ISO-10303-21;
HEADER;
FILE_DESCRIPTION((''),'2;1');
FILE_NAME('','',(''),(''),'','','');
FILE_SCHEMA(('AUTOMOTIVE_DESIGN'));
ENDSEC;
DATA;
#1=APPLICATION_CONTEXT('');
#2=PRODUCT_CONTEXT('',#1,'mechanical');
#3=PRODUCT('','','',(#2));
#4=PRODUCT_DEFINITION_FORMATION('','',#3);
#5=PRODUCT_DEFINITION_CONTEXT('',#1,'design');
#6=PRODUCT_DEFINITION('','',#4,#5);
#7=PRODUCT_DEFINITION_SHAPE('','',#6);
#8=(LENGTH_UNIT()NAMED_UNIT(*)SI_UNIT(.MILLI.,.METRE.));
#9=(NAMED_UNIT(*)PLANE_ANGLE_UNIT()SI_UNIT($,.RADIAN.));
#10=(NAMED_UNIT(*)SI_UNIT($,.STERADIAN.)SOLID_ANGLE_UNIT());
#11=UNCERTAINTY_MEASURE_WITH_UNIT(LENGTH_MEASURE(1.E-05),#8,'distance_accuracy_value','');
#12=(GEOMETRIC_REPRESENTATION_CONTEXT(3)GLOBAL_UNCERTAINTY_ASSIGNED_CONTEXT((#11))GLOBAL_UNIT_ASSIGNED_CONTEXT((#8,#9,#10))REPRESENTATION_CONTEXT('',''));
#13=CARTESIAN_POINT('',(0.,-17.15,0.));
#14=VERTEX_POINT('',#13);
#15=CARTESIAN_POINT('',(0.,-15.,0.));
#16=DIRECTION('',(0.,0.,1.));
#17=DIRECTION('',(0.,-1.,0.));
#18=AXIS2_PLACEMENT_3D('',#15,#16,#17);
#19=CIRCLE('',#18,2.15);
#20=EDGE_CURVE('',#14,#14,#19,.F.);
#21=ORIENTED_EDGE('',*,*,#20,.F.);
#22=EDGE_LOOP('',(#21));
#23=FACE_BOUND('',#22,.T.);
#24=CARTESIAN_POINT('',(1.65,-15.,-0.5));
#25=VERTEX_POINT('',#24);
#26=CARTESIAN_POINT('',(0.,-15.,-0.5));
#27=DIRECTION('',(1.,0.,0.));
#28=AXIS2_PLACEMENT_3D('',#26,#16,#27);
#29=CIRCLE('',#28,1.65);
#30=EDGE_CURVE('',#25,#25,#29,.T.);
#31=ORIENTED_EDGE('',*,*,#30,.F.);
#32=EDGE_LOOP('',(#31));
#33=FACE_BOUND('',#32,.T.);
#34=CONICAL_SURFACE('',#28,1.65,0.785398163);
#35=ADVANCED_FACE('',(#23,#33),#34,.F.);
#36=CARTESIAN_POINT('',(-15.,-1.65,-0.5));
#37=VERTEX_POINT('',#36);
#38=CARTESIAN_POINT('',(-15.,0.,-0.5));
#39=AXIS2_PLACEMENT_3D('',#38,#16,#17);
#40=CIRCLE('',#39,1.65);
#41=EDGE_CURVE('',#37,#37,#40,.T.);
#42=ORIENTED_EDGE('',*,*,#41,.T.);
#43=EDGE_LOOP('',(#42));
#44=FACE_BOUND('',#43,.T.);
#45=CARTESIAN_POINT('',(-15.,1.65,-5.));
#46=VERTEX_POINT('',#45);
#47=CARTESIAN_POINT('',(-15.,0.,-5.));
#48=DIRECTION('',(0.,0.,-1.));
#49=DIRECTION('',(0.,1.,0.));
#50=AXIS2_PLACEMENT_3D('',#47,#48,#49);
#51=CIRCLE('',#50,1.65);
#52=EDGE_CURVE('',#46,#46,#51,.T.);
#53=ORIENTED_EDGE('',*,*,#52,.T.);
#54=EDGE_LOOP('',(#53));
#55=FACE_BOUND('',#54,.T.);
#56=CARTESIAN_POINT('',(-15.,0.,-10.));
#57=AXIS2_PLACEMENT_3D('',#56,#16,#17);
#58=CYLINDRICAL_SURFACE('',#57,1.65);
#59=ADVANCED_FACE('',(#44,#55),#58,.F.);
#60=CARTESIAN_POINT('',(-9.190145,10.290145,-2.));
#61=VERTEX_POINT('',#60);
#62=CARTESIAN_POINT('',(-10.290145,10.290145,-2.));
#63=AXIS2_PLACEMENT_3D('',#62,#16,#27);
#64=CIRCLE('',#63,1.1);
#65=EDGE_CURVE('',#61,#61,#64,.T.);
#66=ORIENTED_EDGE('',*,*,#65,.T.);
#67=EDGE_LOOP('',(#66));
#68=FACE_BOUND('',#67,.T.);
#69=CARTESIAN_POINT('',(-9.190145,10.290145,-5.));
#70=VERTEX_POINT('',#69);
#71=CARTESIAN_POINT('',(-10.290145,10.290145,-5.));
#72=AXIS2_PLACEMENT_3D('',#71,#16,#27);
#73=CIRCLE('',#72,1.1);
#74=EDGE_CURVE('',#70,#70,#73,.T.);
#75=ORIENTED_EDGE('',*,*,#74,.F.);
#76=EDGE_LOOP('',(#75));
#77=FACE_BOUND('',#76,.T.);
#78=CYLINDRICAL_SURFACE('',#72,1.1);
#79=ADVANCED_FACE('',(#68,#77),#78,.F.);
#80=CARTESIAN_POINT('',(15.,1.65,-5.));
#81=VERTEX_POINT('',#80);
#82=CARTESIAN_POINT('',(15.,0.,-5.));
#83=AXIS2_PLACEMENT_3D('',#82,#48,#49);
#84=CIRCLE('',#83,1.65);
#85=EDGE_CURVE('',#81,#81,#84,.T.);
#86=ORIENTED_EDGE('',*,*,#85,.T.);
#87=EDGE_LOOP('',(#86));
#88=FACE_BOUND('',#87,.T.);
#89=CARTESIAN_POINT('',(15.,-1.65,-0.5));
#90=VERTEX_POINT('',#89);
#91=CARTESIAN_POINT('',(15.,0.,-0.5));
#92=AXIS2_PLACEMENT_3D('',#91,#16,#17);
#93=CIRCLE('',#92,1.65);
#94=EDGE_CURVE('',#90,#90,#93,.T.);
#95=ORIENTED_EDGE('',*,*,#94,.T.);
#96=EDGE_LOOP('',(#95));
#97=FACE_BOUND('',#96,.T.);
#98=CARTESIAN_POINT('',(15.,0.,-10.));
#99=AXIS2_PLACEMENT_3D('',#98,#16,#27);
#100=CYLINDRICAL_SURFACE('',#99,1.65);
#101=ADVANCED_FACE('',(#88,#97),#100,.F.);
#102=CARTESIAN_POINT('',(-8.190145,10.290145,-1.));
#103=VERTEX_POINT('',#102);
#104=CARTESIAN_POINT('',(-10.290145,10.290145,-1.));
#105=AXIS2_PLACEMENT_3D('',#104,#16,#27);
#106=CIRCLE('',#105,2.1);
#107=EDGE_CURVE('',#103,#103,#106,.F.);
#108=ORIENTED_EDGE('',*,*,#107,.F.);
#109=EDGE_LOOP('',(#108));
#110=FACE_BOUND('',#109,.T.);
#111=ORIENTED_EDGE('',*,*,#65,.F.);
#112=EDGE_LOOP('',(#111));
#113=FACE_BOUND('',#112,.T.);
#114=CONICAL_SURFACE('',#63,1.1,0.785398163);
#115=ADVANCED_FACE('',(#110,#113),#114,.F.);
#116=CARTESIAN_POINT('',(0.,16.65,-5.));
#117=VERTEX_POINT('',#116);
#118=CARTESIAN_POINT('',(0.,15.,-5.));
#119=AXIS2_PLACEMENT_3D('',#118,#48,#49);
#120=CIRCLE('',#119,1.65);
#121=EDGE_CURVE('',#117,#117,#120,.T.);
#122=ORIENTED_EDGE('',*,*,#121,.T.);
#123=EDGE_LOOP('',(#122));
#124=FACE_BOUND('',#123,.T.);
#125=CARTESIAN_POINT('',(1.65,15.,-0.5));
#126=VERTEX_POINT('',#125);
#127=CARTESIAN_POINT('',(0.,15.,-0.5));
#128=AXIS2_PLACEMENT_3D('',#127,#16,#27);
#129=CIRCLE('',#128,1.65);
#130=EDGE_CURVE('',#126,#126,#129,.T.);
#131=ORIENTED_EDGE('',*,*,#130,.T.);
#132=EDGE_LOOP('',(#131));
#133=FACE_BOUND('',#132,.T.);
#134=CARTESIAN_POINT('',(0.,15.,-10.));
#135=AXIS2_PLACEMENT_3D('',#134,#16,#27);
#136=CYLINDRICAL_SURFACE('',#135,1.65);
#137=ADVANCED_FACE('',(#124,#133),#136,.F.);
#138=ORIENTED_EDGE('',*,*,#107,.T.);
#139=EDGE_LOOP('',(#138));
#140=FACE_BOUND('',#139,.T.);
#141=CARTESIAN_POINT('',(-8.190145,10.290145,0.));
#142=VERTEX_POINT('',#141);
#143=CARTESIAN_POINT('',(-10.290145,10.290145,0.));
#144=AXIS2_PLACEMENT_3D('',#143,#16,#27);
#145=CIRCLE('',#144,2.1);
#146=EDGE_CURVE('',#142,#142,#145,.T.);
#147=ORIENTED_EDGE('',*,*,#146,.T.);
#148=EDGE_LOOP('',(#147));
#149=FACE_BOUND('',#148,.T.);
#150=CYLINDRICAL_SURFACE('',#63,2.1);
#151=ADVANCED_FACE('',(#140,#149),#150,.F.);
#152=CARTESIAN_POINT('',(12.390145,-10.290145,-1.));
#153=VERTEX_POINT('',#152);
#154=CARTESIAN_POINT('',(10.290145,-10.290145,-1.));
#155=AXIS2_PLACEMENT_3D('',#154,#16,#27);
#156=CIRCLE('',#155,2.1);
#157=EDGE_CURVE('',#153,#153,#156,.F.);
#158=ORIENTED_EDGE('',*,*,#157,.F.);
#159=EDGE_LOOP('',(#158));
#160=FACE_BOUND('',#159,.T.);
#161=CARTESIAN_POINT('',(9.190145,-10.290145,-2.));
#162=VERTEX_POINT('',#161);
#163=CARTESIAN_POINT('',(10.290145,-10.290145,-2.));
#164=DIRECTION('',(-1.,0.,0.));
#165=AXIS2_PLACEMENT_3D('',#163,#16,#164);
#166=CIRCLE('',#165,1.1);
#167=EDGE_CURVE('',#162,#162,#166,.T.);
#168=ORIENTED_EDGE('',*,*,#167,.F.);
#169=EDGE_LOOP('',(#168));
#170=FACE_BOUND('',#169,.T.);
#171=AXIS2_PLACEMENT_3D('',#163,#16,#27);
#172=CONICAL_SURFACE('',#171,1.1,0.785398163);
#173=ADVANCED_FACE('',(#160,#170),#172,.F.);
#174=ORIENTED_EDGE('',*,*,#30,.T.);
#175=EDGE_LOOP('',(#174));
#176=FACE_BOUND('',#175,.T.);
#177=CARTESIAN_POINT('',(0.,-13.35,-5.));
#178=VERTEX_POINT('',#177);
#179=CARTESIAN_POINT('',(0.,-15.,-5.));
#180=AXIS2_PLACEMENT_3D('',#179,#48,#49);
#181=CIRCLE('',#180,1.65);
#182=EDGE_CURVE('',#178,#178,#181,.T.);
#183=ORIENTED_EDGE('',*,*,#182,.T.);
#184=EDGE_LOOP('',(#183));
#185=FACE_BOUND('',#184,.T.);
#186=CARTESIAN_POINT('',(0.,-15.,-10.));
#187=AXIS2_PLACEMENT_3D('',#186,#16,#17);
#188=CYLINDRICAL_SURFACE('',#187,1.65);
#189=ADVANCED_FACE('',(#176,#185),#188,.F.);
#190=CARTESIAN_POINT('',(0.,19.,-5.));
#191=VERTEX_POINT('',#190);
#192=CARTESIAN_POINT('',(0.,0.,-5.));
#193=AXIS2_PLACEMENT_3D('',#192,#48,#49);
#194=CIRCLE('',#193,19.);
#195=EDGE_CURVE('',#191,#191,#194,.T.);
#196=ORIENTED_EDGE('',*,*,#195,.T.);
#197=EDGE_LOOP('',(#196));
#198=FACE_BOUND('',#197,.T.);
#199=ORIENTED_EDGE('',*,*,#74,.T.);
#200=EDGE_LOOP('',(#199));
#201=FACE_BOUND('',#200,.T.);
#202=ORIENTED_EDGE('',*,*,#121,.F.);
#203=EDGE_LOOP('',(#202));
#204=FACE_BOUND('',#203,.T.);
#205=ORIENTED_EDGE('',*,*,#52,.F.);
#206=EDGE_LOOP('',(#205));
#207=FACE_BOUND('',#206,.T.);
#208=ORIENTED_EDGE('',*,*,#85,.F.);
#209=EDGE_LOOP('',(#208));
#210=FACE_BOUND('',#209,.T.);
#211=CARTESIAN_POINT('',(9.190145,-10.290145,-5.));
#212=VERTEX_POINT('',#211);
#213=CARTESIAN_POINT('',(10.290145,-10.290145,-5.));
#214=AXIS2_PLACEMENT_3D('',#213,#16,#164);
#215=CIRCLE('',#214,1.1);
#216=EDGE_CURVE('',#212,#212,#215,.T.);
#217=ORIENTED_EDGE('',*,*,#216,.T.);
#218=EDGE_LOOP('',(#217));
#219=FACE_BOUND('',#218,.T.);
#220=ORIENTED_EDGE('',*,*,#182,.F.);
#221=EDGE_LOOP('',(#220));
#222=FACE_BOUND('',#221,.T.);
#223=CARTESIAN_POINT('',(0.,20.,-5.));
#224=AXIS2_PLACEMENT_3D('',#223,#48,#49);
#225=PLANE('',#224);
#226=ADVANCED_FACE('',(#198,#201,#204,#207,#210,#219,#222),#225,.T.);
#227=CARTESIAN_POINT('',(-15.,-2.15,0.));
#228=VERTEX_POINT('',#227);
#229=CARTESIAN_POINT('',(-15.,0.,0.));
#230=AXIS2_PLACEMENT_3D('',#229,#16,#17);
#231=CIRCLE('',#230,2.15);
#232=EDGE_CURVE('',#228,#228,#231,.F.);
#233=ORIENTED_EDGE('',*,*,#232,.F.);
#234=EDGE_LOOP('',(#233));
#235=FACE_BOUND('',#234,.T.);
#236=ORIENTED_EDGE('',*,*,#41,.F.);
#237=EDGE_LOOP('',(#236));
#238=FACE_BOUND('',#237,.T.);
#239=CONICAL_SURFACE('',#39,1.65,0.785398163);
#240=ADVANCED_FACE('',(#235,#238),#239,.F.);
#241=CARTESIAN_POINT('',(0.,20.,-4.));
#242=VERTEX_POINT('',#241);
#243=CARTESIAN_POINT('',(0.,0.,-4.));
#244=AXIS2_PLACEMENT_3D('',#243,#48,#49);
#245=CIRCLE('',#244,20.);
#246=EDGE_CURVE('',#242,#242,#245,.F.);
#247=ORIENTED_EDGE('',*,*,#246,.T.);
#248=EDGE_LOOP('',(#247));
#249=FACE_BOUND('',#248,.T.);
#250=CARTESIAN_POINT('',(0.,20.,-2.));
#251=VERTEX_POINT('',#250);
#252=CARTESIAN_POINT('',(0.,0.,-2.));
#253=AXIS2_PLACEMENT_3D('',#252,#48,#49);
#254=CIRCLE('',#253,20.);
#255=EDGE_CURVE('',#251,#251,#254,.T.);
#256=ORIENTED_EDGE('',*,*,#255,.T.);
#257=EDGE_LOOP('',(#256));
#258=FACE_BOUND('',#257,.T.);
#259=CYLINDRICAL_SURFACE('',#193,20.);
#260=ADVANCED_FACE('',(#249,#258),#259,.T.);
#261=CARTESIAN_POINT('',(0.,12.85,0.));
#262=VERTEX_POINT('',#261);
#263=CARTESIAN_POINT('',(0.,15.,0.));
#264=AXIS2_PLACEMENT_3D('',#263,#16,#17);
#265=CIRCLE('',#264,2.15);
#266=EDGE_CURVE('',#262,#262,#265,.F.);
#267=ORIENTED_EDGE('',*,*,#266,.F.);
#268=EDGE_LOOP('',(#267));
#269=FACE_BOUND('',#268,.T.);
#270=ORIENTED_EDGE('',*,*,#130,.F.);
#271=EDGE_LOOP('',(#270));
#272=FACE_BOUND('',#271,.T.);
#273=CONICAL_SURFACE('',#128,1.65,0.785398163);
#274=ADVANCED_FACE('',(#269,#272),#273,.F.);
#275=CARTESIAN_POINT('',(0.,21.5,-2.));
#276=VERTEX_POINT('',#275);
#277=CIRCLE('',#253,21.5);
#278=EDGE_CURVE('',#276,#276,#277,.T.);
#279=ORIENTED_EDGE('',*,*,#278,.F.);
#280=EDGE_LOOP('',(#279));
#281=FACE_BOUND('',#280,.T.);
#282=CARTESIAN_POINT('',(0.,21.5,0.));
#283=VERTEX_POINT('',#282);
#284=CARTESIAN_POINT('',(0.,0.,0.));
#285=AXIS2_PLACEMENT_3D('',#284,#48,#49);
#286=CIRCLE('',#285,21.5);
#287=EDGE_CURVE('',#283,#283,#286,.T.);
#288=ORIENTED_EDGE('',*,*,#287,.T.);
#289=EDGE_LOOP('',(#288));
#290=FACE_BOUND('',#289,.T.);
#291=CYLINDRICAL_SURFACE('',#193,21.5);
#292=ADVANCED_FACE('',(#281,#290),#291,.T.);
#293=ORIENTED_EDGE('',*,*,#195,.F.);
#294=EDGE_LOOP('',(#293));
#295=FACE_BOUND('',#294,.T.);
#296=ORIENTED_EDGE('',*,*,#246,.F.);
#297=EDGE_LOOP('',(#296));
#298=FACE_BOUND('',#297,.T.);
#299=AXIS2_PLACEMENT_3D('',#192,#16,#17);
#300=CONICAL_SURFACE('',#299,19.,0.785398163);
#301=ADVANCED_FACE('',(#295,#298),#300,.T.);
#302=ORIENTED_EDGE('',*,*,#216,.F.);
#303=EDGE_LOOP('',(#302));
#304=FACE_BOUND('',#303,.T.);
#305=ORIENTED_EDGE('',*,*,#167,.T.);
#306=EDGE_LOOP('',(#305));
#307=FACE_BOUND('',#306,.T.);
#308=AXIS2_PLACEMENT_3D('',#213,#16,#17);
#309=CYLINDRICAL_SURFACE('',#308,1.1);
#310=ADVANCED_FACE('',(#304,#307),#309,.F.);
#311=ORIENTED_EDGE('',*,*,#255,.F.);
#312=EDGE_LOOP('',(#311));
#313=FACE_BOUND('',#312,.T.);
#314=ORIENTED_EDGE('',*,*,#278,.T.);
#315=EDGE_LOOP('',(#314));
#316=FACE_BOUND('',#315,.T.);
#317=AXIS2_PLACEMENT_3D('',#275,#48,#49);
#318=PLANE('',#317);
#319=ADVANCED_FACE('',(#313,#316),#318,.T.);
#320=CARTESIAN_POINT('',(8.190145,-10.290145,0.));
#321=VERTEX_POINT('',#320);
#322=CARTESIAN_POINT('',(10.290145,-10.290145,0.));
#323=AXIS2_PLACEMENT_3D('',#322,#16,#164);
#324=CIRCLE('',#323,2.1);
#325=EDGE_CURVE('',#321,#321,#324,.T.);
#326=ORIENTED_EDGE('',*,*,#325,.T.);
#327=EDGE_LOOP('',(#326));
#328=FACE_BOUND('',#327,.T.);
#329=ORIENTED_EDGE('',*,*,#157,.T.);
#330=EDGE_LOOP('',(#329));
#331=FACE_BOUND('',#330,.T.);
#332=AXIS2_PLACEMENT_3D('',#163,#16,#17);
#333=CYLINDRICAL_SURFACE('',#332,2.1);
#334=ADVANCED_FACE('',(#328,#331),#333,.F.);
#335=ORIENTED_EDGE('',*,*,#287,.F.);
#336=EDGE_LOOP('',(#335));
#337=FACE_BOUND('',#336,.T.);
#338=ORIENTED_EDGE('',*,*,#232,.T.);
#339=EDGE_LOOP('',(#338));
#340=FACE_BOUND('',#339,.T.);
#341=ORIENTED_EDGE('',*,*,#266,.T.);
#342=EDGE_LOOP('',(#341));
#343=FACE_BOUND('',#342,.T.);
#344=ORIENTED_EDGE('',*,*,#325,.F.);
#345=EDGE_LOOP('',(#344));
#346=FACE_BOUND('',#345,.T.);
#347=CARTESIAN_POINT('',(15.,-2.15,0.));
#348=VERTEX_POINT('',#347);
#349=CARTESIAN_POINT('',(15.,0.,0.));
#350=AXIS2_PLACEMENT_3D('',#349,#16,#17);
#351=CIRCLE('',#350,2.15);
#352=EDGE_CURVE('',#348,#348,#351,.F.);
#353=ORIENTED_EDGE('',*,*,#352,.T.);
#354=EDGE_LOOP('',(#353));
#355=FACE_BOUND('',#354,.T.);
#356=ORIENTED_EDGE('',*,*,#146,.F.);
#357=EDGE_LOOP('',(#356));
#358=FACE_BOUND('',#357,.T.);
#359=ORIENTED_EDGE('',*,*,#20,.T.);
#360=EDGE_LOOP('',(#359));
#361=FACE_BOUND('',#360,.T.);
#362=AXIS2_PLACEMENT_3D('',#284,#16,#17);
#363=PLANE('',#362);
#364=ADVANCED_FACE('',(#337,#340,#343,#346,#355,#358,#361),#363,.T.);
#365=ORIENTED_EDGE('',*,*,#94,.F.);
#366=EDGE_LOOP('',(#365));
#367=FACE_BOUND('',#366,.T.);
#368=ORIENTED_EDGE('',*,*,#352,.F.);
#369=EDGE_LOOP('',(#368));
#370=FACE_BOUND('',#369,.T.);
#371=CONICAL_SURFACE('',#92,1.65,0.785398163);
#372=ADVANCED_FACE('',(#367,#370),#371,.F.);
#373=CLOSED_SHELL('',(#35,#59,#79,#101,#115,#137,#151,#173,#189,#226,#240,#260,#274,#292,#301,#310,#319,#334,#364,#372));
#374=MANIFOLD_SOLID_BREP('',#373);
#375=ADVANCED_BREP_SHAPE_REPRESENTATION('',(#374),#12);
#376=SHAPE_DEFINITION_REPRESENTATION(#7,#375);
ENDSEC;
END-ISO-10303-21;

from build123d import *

# Parameters (mm, degrees)
SKETCH2_R                    = 1.6500000000000001
CUT_EXTRUDE1_DEPTH           = 10
CHAMFER1_SIZE                = 0.5
CIRPATTERN1_COUNT            = 4
CHAMFER1_OF_CIRPATTERN1_SIZE = 0.5
CUT_EXTRUDE2_DEPTH           = 2
CHAMFER2_SIZE                = 1
SKETCH4_R                    = 1.09999999999999
CUT_EXTRUDE3_DEPTH           = 31.553232234904378
CHAMFER3_SIZE                = 1


# Read off the part's stored shape, not the designer's step: CirPattern2
with BuildPart() as part:
    # Sketch1 → Revolve1 (revolve)
    with BuildSketch(Plane(origin=(0, 0, 0), x_dir=(0, 0, -1), z_dir=(1, 0, 0))):
        Polygon((0, 0), (0, 21.5), (2, 21.5), (2, 20), (4.999999999999999, 20), (5.000000000000003, -1.7e-16), align=None)
    revolve(axis=Axis((0, -1.7e-16, -5.000000000000003), (0, 3e-17, 1)))

    # Sketch2 → Cut-Extrude1 (cut)
    with BuildSketch(Plane.XY):
        with Locations((0, 15)):
            Circle(SKETCH2_R)
    cut_extrude1 = extrude(amount=-CUT_EXTRUDE1_DEPTH, mode=Mode.SUBTRACT)

    # Chamfer1
    chamfer1_edges = [part.edges().sort_by_distance(p)[0] for p in [
        (-1.6500000000000001, 15.000000000000002, 0),
    ]]
    chamfer(chamfer1_edges, length=CHAMFER1_SIZE)

    # CirPattern1: Cut-Extrude1 ×4 about axis
    cirpattern1_axis = Axis((-2.619e-14, -5e-17, 0), (0, 0, 1))
    for i in range(1, CIRPATTERN1_COUNT):
        add(cut_extrude1.rotate(cirpattern1_axis, i * 360 / CIRPATTERN1_COUNT), mode=Mode.SUBTRACT)

    # Chamfer1 of CirPattern1
    chamfer1_of_cirpattern1_edges = [part.edges().sort_by_distance(p)[0] for p in [
        (-15.000000000000028, -1.649999999999973, 0),
        (1.649999999999946, -15.000000000000002, 0),
        (14.999999999999975, 1.6499999999999713, 0),
    ]]
    chamfer(chamfer1_of_cirpattern1_edges, length=CHAMFER1_OF_CIRPATTERN1_SIZE)

    # Sketch3 → Cut-Extrude2 (cut)
    with BuildSketch(Plane.XY):
        with BuildLine():
            ThreePointArc((-11.775069570500428, 11.77506957050046), (-11.77506957050042, 8.805221089516952), (-8.805221089516914, 8.805221089516971))
            Line((-8.805221089516925, 8.805221089516953), (-11.775069570500422, 11.77506957050046))
        make_face()
        with BuildLine():
            Line((-11.775069570500422, 11.77506957050046), (-8.805221089516925, 8.805221089516953))
            ThreePointArc((-8.805221089516914, 8.805221089516971), (-8.34999831173497, 9.486510122042029), (-8.190145330008676, 10.29014533000871))
            ThreePointArc((-8.190145330008676, 10.29014533000871), (-9.486510122041988, 12.230292348282413), (-11.775069570500428, 11.77506957050046))
        make_face()
    extrude(amount=-CUT_EXTRUDE2_DEPTH, mode=Mode.SUBTRACT)

    # Chamfer2
    chamfer2_edges = [part.edges().sort_by_distance(p)[0] for p in [
        (-11.775069570500419, 11.775069570500454, -2),
    ]]
    chamfer(chamfer2_edges, length=CHAMFER2_SIZE)

    # Sketch4 → Cut-Extrude3 (cut, through all)
    with BuildSketch(Plane.XY.offset(-2)):
        with Locations((-10.290145330008677, 10.29014533000871)):
            Circle(SKETCH4_R)
    extrude(amount=-CUT_EXTRUDE3_DEPTH, mode=Mode.SUBTRACT)

    # CirPattern2 outline → CirPattern2 (revolve, cut)
    with BuildSketch(Plane(origin=(10.29014533, -10.29014533, 0), x_dir=(1, 0, 0), z_dir=(0, -1, 0))):
        Polygon((1.1, -2), (2.1, -1), (2.1, 0), (0, 0), (0, -5), (1.1, -5), align=None)
    revolve(axis=Axis((10.29014533, -10.29014533, 0), (0, 0, 1)), mode=Mode.SUBTRACT)

    # Chamfer3
    chamfer3_edges = [part.edges().sort_by_distance(p)[0] for p in [
        (-2.45e-15, -20, -4.999999999999997),
    ]]
    chamfer(chamfer3_edges, length=CHAMFER3_SIZE)


solid = part.part
